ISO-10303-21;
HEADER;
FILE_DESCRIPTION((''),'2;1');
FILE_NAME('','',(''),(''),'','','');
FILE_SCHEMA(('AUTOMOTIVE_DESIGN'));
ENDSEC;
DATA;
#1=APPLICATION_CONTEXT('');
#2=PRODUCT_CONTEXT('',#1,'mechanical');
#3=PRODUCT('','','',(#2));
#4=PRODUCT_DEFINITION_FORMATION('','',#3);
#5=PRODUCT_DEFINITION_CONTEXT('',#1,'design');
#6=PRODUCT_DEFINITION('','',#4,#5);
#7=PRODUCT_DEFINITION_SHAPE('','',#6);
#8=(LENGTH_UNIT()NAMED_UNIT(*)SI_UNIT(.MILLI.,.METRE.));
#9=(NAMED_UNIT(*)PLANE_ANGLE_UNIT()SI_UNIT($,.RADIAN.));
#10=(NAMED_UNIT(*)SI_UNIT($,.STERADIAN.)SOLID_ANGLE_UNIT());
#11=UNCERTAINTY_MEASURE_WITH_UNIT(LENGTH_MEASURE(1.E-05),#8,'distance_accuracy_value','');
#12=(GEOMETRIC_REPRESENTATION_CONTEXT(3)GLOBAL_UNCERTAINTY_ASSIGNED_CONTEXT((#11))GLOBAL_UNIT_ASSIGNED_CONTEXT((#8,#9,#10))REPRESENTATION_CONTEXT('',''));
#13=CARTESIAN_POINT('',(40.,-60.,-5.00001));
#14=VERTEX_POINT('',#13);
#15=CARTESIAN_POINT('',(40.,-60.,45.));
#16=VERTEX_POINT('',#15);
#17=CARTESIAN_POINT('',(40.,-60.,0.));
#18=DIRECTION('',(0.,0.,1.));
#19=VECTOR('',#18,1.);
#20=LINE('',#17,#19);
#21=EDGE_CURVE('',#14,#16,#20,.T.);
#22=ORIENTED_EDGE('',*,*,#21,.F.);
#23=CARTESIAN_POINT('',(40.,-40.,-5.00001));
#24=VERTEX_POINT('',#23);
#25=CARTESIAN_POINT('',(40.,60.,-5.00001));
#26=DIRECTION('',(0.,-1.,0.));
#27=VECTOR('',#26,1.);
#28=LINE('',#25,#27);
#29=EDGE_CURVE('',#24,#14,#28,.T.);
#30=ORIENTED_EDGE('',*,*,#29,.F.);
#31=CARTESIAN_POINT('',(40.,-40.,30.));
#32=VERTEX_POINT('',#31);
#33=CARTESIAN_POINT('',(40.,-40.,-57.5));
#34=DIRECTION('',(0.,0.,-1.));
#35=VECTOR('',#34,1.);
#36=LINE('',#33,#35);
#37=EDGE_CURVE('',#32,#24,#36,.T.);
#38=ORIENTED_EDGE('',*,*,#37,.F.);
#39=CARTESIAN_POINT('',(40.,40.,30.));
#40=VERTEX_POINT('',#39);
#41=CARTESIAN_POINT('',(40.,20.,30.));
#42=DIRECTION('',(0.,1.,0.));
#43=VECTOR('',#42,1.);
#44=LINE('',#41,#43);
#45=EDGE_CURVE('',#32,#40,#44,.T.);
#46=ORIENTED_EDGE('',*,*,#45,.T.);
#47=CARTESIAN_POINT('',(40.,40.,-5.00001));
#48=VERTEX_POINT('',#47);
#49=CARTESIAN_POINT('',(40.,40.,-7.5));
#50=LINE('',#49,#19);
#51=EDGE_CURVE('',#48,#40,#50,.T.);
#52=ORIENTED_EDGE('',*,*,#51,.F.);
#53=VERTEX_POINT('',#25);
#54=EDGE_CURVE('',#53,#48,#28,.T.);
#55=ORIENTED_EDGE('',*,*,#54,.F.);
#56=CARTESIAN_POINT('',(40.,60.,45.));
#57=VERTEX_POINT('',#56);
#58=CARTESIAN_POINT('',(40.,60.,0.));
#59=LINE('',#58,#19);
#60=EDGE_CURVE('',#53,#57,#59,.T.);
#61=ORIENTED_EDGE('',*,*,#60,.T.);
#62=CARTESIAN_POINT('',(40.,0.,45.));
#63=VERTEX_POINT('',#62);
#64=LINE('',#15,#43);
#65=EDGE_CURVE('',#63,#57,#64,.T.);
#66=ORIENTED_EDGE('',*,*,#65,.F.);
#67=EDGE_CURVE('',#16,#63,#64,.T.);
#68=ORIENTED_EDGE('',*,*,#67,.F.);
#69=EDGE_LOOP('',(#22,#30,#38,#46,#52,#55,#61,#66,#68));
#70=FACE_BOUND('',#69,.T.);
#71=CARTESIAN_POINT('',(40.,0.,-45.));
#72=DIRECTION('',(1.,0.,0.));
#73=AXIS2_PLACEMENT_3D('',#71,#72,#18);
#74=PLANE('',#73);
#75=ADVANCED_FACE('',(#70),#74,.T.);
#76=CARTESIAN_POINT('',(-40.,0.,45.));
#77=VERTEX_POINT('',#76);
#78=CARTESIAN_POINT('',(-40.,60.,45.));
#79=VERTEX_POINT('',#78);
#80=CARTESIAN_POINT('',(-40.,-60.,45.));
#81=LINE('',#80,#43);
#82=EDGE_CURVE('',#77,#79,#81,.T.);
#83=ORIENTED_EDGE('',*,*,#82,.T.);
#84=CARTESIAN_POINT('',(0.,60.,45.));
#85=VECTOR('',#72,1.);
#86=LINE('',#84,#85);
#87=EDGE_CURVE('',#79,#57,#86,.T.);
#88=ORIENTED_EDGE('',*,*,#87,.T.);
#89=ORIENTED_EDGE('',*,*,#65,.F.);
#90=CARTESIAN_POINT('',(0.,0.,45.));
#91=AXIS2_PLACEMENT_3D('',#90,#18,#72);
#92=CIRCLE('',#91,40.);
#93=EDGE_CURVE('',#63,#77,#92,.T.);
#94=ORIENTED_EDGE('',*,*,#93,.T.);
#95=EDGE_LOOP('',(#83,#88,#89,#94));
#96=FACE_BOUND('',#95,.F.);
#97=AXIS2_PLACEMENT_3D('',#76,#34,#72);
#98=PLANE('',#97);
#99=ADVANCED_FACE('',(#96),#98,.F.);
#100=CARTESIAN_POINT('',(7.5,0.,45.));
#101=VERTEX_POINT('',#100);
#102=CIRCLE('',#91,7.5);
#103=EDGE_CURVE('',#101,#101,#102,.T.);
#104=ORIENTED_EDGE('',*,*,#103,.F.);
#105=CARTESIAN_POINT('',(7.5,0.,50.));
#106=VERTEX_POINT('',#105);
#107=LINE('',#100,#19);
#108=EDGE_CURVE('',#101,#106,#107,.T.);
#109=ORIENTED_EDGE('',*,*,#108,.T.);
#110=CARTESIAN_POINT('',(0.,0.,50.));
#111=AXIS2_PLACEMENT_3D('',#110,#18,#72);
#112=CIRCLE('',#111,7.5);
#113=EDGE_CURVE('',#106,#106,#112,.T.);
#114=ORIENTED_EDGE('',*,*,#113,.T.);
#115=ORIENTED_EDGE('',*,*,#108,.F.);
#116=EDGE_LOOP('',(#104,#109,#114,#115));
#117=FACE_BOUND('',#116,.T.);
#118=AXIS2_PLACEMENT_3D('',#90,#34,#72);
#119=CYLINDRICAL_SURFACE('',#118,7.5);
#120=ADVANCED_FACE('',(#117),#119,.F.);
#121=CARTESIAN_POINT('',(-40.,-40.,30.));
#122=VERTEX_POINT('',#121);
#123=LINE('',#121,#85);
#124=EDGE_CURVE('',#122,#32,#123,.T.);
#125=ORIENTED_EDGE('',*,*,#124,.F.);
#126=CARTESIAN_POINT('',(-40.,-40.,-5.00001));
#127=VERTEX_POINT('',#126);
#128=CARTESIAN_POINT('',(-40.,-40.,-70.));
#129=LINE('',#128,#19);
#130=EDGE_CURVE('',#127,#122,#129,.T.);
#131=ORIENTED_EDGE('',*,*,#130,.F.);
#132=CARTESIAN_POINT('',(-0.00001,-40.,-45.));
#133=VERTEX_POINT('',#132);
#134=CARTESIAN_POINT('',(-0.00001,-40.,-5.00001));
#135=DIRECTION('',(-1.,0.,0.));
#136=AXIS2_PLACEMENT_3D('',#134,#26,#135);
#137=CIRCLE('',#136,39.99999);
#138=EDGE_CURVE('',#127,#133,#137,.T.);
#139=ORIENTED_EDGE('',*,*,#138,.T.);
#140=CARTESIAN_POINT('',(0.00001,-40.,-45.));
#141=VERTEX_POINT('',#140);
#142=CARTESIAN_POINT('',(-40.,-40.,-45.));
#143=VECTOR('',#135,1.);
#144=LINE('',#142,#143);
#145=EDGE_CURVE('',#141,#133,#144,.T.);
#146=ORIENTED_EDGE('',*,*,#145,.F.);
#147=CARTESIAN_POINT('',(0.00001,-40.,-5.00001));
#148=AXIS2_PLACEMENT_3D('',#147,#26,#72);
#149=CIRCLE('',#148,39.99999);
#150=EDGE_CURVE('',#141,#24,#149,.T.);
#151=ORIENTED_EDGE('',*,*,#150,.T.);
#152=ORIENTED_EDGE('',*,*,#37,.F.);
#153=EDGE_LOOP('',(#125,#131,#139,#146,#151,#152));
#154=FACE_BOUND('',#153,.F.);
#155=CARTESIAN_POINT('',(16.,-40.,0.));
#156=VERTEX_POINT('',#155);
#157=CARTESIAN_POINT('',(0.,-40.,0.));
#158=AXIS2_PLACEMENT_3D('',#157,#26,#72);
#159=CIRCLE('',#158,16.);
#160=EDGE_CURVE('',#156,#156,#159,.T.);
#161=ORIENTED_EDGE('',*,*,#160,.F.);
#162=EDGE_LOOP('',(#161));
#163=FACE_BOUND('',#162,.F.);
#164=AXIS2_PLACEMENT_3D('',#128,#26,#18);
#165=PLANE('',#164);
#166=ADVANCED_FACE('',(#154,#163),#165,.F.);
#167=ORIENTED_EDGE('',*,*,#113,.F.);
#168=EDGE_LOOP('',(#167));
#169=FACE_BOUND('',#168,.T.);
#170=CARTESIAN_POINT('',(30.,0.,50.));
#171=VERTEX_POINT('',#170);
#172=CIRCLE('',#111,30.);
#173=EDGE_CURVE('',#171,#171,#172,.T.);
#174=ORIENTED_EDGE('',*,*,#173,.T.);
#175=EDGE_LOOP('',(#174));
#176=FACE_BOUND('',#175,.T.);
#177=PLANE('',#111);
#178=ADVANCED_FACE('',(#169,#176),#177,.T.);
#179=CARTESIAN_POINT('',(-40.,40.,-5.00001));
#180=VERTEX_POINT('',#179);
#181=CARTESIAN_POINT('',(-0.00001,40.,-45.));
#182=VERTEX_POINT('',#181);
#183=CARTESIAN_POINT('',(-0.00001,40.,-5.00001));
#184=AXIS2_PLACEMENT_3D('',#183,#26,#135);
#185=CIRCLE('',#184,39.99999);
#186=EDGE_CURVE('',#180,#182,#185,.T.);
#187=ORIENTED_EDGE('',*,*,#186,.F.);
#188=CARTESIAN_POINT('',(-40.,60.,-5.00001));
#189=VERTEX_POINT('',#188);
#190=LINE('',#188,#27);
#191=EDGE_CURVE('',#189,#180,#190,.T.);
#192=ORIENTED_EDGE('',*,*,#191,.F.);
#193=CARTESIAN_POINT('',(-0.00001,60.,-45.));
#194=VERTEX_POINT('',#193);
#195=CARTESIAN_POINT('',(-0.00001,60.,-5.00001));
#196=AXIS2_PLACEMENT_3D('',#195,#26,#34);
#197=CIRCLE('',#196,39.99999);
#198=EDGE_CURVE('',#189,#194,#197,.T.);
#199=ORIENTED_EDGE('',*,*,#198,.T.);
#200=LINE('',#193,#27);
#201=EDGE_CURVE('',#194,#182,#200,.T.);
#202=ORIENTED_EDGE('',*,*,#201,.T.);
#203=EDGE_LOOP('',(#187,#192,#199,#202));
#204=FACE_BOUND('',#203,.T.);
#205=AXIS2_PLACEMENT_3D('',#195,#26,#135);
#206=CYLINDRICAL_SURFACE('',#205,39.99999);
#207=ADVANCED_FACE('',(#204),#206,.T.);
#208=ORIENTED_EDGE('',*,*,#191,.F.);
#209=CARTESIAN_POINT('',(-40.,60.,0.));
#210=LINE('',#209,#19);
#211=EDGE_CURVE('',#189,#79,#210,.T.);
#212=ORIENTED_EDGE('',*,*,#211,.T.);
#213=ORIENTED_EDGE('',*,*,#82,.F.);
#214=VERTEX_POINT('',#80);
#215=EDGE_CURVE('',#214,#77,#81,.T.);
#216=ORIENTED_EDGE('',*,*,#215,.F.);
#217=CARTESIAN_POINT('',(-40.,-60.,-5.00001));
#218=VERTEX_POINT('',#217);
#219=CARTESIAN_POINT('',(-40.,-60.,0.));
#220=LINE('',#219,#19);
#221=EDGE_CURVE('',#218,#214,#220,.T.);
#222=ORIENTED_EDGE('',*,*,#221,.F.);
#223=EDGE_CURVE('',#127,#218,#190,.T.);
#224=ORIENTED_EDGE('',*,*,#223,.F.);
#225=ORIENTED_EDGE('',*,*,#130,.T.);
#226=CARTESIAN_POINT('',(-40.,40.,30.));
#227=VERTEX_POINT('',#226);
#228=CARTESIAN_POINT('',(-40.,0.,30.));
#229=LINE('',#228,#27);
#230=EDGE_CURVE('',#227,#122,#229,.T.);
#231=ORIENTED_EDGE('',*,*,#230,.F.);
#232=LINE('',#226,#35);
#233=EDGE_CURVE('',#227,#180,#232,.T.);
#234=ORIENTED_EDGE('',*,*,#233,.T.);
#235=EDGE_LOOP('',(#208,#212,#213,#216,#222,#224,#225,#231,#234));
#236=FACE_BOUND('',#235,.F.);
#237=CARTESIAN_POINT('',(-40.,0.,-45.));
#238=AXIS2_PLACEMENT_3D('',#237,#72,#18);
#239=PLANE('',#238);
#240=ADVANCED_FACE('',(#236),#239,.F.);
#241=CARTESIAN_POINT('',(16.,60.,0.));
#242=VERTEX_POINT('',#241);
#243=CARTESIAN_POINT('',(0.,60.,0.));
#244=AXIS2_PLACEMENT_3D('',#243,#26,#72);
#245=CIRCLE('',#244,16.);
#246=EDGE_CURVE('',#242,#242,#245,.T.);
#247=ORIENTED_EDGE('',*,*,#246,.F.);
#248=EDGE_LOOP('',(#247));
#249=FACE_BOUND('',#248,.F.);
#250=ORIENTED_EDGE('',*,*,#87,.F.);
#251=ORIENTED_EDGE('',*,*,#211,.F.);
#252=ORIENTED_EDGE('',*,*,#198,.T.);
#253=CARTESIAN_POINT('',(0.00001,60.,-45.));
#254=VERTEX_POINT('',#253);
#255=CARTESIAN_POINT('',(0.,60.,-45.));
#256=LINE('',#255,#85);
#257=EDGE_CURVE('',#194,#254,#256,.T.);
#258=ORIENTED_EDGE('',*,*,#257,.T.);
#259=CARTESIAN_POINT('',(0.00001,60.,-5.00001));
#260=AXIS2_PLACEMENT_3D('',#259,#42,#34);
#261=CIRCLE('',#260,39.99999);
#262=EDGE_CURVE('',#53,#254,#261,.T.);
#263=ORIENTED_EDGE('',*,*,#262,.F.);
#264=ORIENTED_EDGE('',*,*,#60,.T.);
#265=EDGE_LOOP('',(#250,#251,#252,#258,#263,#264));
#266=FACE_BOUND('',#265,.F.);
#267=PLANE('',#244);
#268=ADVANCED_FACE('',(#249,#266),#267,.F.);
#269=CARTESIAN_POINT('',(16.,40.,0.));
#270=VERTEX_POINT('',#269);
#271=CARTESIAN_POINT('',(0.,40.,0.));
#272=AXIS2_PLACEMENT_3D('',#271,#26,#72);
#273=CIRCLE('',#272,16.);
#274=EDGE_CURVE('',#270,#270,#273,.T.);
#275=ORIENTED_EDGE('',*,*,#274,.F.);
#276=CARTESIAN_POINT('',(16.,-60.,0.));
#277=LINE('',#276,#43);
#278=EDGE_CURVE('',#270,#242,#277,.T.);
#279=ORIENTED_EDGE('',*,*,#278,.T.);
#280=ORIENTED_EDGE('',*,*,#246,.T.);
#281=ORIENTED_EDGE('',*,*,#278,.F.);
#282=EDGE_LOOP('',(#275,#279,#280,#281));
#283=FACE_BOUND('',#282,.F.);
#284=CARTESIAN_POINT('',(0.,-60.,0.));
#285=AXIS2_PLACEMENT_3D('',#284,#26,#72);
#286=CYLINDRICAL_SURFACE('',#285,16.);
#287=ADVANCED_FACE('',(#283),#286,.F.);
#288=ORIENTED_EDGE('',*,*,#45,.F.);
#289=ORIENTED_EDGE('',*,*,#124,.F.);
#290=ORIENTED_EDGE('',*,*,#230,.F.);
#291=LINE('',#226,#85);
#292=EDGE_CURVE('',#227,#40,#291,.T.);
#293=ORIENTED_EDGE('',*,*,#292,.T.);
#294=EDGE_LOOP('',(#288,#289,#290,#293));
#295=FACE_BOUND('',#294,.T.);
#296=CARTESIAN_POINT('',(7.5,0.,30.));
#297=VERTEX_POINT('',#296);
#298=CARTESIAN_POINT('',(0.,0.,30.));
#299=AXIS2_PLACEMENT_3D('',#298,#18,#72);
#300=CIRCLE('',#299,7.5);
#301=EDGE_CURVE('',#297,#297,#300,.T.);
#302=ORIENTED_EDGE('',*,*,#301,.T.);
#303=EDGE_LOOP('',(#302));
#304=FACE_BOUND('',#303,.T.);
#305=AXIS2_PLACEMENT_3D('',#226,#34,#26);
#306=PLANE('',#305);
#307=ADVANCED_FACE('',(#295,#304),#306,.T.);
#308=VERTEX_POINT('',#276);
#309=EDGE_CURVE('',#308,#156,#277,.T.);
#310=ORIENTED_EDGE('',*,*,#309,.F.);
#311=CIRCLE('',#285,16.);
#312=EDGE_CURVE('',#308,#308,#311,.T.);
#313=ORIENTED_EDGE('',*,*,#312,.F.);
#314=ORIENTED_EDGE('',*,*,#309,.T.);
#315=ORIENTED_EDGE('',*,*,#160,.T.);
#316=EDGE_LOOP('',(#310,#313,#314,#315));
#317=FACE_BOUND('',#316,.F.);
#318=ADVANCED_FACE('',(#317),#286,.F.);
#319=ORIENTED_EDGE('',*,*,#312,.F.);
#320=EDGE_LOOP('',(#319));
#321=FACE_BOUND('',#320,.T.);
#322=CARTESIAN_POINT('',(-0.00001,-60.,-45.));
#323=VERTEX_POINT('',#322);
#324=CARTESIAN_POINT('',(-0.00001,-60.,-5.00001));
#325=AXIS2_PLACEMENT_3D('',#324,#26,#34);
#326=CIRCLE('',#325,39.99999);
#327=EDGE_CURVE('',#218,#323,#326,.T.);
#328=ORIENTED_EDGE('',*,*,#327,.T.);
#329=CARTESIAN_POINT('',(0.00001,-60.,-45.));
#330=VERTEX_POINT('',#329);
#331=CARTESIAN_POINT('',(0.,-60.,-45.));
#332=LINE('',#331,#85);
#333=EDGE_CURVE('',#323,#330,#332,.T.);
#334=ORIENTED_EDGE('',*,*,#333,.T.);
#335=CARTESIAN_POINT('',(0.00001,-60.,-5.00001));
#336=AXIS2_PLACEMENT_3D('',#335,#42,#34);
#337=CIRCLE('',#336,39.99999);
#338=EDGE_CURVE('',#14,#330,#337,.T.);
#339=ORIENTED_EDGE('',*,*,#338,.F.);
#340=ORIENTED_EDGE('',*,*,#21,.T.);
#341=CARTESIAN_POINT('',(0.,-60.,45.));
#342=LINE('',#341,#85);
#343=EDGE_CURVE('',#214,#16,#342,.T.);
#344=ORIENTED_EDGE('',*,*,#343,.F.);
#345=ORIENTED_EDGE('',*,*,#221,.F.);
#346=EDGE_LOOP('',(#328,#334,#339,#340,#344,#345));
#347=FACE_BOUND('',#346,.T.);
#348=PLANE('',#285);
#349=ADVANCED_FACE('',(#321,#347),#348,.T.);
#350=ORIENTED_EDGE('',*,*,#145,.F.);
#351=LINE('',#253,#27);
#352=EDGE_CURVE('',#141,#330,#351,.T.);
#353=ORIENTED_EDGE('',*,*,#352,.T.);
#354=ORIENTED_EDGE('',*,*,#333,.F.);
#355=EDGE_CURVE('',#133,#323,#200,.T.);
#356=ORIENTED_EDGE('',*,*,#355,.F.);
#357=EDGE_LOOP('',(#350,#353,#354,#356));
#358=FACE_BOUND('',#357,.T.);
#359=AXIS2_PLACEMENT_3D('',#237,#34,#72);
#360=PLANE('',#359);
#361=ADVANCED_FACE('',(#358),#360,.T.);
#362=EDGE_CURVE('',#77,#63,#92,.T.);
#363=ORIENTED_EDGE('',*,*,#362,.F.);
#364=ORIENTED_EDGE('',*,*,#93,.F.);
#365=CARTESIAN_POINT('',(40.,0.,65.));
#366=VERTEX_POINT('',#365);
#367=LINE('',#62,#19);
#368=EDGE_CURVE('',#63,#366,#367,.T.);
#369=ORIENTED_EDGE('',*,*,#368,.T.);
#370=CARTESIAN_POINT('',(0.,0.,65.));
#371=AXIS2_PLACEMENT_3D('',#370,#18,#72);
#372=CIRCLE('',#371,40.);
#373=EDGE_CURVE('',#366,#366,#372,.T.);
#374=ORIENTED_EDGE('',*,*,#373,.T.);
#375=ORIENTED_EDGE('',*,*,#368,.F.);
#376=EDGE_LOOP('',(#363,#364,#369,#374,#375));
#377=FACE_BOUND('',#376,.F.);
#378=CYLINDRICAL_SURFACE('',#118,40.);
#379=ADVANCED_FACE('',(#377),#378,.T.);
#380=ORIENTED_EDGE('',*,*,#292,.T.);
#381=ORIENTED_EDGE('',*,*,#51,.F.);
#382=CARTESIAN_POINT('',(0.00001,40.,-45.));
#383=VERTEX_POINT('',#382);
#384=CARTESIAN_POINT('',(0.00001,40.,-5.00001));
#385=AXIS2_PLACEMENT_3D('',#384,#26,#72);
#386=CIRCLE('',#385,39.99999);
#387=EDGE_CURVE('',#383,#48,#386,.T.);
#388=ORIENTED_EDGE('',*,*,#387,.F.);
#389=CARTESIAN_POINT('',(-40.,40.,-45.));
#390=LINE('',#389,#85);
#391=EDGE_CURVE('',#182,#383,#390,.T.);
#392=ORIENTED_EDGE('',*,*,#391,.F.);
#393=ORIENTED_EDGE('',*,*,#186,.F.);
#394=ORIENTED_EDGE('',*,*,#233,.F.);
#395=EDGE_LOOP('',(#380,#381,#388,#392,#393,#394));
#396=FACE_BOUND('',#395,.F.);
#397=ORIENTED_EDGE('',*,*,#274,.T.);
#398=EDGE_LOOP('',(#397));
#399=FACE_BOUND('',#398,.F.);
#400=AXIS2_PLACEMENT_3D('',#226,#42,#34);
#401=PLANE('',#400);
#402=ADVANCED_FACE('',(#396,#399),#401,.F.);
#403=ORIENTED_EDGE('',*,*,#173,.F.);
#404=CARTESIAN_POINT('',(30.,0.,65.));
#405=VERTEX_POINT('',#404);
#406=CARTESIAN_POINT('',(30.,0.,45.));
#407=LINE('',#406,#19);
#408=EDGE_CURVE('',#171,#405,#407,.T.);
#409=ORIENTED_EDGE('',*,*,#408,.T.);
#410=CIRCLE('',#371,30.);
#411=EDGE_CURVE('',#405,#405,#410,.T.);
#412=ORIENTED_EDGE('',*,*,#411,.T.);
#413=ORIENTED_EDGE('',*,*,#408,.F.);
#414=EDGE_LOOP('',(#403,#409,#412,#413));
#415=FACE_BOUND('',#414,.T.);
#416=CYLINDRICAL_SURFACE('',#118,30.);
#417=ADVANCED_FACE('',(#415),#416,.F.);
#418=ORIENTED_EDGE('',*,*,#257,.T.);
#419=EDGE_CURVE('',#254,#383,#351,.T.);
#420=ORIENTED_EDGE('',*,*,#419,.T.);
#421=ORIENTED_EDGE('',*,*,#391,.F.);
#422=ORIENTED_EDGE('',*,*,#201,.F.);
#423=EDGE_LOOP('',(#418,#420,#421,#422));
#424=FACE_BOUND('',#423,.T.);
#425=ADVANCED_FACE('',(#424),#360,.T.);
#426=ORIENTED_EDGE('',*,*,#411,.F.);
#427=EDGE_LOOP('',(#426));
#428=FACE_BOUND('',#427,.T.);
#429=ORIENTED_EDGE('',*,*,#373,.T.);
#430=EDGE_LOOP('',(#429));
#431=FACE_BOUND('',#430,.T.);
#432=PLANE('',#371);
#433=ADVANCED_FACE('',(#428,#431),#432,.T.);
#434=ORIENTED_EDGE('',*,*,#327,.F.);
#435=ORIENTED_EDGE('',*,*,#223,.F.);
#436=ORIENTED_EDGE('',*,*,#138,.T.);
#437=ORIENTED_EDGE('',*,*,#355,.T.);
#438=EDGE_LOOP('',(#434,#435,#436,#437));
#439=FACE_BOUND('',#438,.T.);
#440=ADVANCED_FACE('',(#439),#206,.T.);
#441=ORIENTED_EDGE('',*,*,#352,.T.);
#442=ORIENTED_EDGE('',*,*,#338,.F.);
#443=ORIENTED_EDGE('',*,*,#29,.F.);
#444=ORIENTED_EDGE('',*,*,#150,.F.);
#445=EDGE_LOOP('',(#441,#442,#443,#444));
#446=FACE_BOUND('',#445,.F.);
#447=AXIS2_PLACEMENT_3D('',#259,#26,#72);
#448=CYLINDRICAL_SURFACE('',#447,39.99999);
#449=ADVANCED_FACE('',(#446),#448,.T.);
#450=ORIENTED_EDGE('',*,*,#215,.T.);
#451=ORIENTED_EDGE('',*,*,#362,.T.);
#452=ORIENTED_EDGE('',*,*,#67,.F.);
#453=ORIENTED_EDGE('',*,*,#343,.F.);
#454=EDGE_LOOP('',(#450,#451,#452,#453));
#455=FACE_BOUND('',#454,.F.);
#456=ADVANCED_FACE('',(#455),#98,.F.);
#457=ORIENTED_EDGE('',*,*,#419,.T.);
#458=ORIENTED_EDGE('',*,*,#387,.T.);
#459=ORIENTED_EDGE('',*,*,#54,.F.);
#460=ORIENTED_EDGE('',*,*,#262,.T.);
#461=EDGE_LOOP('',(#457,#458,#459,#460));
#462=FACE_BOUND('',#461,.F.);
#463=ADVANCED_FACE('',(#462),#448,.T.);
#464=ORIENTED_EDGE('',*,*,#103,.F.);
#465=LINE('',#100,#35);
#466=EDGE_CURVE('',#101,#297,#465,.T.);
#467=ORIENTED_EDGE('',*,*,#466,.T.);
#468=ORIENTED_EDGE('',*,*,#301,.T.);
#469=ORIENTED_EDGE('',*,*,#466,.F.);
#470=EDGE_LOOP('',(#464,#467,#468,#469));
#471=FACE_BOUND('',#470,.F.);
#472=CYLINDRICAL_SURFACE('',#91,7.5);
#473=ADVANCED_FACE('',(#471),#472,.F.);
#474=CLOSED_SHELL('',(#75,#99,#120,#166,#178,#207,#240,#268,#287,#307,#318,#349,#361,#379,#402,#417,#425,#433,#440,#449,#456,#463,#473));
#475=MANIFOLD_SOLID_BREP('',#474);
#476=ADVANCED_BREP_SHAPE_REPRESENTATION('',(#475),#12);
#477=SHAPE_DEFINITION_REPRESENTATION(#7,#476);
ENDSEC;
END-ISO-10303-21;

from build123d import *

# Parameters (mm, degrees)
F0_W          = 80
F0_H          = 90
F1_DEPTH      = 60
F1_DEPTH_BACK = 60
F2_R          = 39.99999
F3_R          = 16
F4_DEPTH      = 120.001
F5_W          = 80
F5_H          = 64.99999
F5_H_2        = 35.00001
F6_DEPTH      = 80.001
F7_R          = 7.5
F8_DEPTH      = 90.001
F7_R_2        = 30
F9_DEPTH      = 5
F10_DEPTH     = 20


# Not quite as in the source:
# - a fillet or chamfer is up to 0.001 mm smaller than in the source, because OpenCascade refuses the exact size


with BuildPart() as f1:
    # F0 (on Front) → F1 (new body, two sides)
    with BuildSketch(Plane.XZ) as f1_sk:
        Rectangle(F0_W, F0_H)
    extrude(amount=F1_DEPTH)
    extrude(f1_sk.sketch, amount=-F1_DEPTH_BACK)

    # F2 (radius 40 in the source; OpenCascade refuses exactly that, so slightly less here)
    f2_edges = [f1.edges().sort_by_distance(p)[0] for p in [
        (40, 0, -45),
        (-40, 0, -45),
    ]]
    fillet(f2_edges, radius=F2_R)

    # F3 (on face) → F4 (cut, through all)
    with BuildSketch(Plane.XZ.offset(60)):
        Circle(F3_R)
    extrude(amount=-F4_DEPTH, mode=Mode.SUBTRACT)

    # F5 (on face) → F6 (cut, through all)
    with BuildSketch(Plane(origin=(-40, 0, 0), x_dir=(0, -1, 0), z_dir=(-1, 0, 0))):
        with Locations((0, -37.500005)):
            Rectangle(F5_W, F5_H)
        with Locations((0, 12.499995)):
            Rectangle(F5_W, F5_H_2)
    extrude(amount=-F6_DEPTH, mode=Mode.SUBTRACT)

    # F7 (on face) → F8 (cut, through all)
    with BuildSketch(Plane.XY.offset(45)):
        Circle(F7_R)
    extrude(amount=-F8_DEPTH, mode=Mode.SUBTRACT)

    # F7 (on face) → F9 (join)
    with BuildSketch(Plane.XY.offset(45)):
        Circle(F7_R_2)
        Circle(F7_R, mode=Mode.SUBTRACT)
    extrude(amount=F9_DEPTH)

    # F7 (on face) → F10 (join)
    with BuildSketch(Plane.XY.offset(45)):
        with BuildLine():
            ThreePointArc((-40, 0), (0, -40), (40, 0))
            ThreePointArc((40, 0), (0, 40), (-40, 0))
        make_face()
        Circle(F7_R_2, mode=Mode.SUBTRACT)
    extrude(amount=F10_DEPTH)


solid = f1.part
